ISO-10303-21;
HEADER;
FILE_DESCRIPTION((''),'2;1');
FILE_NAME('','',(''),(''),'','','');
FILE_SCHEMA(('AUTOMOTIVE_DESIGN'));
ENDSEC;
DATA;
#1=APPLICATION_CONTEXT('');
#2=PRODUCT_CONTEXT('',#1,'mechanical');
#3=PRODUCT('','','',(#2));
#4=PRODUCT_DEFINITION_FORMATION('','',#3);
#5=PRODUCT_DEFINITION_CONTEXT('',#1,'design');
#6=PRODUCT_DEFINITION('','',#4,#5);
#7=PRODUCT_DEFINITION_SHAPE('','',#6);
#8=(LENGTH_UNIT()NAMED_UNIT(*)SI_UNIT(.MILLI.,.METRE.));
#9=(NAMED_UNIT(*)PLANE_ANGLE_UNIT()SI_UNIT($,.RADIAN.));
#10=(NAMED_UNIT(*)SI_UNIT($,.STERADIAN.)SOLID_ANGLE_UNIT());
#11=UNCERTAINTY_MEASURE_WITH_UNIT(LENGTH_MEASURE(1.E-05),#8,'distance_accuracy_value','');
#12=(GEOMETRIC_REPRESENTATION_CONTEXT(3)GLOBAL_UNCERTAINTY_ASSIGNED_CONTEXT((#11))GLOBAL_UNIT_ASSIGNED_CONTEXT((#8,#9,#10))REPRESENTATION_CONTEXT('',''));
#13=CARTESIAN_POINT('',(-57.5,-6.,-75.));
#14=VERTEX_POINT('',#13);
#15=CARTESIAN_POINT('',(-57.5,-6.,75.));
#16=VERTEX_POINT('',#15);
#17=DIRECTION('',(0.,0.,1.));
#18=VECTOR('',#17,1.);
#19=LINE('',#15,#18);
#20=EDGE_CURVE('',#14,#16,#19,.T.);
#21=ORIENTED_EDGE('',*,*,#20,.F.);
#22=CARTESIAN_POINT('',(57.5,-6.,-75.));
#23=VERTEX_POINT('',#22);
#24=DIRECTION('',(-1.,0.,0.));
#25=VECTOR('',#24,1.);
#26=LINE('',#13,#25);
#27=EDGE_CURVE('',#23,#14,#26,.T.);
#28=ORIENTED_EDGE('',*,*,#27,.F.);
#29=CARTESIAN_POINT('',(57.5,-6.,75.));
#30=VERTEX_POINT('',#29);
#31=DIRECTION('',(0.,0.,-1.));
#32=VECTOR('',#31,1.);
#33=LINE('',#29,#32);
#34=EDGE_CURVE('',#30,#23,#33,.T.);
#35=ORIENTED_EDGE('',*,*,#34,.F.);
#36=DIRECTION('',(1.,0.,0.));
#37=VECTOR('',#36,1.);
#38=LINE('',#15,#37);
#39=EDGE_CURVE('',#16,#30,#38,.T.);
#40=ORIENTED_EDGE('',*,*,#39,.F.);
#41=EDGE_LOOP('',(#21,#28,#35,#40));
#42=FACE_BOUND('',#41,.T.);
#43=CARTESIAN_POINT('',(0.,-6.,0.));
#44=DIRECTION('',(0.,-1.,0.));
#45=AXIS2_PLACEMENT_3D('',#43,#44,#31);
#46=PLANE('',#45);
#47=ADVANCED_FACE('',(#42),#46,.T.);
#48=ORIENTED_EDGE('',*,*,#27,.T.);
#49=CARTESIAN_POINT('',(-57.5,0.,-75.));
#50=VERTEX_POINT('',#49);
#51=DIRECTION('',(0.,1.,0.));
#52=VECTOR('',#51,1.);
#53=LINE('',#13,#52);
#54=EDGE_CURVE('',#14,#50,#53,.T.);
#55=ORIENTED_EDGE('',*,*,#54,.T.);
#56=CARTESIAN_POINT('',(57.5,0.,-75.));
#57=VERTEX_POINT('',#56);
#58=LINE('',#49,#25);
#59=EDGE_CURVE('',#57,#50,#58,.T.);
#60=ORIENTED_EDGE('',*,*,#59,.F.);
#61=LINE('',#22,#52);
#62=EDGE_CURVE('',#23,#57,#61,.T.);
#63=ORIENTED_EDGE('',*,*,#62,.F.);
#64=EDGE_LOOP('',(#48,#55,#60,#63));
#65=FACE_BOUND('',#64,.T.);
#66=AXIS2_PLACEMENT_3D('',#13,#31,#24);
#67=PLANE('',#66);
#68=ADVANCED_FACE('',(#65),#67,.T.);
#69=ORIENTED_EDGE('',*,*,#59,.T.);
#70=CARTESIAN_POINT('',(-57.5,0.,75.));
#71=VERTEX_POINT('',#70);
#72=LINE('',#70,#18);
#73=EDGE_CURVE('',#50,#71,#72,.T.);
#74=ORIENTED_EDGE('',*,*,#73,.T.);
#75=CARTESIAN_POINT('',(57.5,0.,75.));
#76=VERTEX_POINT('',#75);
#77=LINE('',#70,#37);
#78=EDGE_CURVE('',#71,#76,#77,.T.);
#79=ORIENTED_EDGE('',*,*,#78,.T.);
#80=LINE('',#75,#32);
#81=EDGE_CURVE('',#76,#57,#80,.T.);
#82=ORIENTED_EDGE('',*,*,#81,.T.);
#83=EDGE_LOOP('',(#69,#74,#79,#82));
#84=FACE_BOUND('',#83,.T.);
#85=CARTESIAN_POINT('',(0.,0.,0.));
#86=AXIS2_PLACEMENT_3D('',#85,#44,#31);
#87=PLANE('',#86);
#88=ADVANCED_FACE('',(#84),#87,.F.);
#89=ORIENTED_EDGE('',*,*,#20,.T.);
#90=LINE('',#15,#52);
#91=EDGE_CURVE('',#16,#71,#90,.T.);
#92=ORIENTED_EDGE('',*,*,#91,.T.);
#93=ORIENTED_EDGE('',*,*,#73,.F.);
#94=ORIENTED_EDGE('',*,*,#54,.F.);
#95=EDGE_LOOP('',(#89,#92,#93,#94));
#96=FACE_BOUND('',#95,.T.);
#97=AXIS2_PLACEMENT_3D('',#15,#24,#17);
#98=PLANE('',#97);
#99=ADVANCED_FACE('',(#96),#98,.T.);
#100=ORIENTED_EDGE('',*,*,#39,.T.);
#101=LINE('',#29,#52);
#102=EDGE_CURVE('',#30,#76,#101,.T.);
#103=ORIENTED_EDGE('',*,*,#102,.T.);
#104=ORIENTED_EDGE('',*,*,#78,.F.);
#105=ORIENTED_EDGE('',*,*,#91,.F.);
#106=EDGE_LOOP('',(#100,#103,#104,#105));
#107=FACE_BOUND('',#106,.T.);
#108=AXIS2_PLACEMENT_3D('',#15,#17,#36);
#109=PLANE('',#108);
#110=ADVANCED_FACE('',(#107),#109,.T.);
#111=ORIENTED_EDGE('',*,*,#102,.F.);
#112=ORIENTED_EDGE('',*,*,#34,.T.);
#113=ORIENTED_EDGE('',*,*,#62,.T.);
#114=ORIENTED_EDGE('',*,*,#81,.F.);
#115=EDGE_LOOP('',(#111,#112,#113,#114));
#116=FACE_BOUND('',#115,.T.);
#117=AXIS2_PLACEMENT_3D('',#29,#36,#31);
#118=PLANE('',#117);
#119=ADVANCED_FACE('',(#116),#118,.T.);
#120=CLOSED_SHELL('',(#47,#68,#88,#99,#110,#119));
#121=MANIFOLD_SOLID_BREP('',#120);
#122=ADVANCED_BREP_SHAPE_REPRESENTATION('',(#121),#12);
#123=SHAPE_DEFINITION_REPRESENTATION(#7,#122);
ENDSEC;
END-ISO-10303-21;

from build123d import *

# Parameters (mm, degrees)
SKETCH_1_W             = 115
SKETCH_1_H             = 150
SM_BASE_FLANGE_1_DEPTH = 6


# Sheet-metal steps are written as plain solids
with BuildPart() as part:
    # Sketch 1 → Базовая кромка1 (new body)
    with BuildSketch(Plane(origin=(0, 0, 0), x_dir=(1, 0, 0), z_dir=(0, 1, 0))):
        Rectangle(SKETCH_1_W, SKETCH_1_H)
    extrude(amount=-SM_BASE_FLANGE_1_DEPTH)


solid = part.part
